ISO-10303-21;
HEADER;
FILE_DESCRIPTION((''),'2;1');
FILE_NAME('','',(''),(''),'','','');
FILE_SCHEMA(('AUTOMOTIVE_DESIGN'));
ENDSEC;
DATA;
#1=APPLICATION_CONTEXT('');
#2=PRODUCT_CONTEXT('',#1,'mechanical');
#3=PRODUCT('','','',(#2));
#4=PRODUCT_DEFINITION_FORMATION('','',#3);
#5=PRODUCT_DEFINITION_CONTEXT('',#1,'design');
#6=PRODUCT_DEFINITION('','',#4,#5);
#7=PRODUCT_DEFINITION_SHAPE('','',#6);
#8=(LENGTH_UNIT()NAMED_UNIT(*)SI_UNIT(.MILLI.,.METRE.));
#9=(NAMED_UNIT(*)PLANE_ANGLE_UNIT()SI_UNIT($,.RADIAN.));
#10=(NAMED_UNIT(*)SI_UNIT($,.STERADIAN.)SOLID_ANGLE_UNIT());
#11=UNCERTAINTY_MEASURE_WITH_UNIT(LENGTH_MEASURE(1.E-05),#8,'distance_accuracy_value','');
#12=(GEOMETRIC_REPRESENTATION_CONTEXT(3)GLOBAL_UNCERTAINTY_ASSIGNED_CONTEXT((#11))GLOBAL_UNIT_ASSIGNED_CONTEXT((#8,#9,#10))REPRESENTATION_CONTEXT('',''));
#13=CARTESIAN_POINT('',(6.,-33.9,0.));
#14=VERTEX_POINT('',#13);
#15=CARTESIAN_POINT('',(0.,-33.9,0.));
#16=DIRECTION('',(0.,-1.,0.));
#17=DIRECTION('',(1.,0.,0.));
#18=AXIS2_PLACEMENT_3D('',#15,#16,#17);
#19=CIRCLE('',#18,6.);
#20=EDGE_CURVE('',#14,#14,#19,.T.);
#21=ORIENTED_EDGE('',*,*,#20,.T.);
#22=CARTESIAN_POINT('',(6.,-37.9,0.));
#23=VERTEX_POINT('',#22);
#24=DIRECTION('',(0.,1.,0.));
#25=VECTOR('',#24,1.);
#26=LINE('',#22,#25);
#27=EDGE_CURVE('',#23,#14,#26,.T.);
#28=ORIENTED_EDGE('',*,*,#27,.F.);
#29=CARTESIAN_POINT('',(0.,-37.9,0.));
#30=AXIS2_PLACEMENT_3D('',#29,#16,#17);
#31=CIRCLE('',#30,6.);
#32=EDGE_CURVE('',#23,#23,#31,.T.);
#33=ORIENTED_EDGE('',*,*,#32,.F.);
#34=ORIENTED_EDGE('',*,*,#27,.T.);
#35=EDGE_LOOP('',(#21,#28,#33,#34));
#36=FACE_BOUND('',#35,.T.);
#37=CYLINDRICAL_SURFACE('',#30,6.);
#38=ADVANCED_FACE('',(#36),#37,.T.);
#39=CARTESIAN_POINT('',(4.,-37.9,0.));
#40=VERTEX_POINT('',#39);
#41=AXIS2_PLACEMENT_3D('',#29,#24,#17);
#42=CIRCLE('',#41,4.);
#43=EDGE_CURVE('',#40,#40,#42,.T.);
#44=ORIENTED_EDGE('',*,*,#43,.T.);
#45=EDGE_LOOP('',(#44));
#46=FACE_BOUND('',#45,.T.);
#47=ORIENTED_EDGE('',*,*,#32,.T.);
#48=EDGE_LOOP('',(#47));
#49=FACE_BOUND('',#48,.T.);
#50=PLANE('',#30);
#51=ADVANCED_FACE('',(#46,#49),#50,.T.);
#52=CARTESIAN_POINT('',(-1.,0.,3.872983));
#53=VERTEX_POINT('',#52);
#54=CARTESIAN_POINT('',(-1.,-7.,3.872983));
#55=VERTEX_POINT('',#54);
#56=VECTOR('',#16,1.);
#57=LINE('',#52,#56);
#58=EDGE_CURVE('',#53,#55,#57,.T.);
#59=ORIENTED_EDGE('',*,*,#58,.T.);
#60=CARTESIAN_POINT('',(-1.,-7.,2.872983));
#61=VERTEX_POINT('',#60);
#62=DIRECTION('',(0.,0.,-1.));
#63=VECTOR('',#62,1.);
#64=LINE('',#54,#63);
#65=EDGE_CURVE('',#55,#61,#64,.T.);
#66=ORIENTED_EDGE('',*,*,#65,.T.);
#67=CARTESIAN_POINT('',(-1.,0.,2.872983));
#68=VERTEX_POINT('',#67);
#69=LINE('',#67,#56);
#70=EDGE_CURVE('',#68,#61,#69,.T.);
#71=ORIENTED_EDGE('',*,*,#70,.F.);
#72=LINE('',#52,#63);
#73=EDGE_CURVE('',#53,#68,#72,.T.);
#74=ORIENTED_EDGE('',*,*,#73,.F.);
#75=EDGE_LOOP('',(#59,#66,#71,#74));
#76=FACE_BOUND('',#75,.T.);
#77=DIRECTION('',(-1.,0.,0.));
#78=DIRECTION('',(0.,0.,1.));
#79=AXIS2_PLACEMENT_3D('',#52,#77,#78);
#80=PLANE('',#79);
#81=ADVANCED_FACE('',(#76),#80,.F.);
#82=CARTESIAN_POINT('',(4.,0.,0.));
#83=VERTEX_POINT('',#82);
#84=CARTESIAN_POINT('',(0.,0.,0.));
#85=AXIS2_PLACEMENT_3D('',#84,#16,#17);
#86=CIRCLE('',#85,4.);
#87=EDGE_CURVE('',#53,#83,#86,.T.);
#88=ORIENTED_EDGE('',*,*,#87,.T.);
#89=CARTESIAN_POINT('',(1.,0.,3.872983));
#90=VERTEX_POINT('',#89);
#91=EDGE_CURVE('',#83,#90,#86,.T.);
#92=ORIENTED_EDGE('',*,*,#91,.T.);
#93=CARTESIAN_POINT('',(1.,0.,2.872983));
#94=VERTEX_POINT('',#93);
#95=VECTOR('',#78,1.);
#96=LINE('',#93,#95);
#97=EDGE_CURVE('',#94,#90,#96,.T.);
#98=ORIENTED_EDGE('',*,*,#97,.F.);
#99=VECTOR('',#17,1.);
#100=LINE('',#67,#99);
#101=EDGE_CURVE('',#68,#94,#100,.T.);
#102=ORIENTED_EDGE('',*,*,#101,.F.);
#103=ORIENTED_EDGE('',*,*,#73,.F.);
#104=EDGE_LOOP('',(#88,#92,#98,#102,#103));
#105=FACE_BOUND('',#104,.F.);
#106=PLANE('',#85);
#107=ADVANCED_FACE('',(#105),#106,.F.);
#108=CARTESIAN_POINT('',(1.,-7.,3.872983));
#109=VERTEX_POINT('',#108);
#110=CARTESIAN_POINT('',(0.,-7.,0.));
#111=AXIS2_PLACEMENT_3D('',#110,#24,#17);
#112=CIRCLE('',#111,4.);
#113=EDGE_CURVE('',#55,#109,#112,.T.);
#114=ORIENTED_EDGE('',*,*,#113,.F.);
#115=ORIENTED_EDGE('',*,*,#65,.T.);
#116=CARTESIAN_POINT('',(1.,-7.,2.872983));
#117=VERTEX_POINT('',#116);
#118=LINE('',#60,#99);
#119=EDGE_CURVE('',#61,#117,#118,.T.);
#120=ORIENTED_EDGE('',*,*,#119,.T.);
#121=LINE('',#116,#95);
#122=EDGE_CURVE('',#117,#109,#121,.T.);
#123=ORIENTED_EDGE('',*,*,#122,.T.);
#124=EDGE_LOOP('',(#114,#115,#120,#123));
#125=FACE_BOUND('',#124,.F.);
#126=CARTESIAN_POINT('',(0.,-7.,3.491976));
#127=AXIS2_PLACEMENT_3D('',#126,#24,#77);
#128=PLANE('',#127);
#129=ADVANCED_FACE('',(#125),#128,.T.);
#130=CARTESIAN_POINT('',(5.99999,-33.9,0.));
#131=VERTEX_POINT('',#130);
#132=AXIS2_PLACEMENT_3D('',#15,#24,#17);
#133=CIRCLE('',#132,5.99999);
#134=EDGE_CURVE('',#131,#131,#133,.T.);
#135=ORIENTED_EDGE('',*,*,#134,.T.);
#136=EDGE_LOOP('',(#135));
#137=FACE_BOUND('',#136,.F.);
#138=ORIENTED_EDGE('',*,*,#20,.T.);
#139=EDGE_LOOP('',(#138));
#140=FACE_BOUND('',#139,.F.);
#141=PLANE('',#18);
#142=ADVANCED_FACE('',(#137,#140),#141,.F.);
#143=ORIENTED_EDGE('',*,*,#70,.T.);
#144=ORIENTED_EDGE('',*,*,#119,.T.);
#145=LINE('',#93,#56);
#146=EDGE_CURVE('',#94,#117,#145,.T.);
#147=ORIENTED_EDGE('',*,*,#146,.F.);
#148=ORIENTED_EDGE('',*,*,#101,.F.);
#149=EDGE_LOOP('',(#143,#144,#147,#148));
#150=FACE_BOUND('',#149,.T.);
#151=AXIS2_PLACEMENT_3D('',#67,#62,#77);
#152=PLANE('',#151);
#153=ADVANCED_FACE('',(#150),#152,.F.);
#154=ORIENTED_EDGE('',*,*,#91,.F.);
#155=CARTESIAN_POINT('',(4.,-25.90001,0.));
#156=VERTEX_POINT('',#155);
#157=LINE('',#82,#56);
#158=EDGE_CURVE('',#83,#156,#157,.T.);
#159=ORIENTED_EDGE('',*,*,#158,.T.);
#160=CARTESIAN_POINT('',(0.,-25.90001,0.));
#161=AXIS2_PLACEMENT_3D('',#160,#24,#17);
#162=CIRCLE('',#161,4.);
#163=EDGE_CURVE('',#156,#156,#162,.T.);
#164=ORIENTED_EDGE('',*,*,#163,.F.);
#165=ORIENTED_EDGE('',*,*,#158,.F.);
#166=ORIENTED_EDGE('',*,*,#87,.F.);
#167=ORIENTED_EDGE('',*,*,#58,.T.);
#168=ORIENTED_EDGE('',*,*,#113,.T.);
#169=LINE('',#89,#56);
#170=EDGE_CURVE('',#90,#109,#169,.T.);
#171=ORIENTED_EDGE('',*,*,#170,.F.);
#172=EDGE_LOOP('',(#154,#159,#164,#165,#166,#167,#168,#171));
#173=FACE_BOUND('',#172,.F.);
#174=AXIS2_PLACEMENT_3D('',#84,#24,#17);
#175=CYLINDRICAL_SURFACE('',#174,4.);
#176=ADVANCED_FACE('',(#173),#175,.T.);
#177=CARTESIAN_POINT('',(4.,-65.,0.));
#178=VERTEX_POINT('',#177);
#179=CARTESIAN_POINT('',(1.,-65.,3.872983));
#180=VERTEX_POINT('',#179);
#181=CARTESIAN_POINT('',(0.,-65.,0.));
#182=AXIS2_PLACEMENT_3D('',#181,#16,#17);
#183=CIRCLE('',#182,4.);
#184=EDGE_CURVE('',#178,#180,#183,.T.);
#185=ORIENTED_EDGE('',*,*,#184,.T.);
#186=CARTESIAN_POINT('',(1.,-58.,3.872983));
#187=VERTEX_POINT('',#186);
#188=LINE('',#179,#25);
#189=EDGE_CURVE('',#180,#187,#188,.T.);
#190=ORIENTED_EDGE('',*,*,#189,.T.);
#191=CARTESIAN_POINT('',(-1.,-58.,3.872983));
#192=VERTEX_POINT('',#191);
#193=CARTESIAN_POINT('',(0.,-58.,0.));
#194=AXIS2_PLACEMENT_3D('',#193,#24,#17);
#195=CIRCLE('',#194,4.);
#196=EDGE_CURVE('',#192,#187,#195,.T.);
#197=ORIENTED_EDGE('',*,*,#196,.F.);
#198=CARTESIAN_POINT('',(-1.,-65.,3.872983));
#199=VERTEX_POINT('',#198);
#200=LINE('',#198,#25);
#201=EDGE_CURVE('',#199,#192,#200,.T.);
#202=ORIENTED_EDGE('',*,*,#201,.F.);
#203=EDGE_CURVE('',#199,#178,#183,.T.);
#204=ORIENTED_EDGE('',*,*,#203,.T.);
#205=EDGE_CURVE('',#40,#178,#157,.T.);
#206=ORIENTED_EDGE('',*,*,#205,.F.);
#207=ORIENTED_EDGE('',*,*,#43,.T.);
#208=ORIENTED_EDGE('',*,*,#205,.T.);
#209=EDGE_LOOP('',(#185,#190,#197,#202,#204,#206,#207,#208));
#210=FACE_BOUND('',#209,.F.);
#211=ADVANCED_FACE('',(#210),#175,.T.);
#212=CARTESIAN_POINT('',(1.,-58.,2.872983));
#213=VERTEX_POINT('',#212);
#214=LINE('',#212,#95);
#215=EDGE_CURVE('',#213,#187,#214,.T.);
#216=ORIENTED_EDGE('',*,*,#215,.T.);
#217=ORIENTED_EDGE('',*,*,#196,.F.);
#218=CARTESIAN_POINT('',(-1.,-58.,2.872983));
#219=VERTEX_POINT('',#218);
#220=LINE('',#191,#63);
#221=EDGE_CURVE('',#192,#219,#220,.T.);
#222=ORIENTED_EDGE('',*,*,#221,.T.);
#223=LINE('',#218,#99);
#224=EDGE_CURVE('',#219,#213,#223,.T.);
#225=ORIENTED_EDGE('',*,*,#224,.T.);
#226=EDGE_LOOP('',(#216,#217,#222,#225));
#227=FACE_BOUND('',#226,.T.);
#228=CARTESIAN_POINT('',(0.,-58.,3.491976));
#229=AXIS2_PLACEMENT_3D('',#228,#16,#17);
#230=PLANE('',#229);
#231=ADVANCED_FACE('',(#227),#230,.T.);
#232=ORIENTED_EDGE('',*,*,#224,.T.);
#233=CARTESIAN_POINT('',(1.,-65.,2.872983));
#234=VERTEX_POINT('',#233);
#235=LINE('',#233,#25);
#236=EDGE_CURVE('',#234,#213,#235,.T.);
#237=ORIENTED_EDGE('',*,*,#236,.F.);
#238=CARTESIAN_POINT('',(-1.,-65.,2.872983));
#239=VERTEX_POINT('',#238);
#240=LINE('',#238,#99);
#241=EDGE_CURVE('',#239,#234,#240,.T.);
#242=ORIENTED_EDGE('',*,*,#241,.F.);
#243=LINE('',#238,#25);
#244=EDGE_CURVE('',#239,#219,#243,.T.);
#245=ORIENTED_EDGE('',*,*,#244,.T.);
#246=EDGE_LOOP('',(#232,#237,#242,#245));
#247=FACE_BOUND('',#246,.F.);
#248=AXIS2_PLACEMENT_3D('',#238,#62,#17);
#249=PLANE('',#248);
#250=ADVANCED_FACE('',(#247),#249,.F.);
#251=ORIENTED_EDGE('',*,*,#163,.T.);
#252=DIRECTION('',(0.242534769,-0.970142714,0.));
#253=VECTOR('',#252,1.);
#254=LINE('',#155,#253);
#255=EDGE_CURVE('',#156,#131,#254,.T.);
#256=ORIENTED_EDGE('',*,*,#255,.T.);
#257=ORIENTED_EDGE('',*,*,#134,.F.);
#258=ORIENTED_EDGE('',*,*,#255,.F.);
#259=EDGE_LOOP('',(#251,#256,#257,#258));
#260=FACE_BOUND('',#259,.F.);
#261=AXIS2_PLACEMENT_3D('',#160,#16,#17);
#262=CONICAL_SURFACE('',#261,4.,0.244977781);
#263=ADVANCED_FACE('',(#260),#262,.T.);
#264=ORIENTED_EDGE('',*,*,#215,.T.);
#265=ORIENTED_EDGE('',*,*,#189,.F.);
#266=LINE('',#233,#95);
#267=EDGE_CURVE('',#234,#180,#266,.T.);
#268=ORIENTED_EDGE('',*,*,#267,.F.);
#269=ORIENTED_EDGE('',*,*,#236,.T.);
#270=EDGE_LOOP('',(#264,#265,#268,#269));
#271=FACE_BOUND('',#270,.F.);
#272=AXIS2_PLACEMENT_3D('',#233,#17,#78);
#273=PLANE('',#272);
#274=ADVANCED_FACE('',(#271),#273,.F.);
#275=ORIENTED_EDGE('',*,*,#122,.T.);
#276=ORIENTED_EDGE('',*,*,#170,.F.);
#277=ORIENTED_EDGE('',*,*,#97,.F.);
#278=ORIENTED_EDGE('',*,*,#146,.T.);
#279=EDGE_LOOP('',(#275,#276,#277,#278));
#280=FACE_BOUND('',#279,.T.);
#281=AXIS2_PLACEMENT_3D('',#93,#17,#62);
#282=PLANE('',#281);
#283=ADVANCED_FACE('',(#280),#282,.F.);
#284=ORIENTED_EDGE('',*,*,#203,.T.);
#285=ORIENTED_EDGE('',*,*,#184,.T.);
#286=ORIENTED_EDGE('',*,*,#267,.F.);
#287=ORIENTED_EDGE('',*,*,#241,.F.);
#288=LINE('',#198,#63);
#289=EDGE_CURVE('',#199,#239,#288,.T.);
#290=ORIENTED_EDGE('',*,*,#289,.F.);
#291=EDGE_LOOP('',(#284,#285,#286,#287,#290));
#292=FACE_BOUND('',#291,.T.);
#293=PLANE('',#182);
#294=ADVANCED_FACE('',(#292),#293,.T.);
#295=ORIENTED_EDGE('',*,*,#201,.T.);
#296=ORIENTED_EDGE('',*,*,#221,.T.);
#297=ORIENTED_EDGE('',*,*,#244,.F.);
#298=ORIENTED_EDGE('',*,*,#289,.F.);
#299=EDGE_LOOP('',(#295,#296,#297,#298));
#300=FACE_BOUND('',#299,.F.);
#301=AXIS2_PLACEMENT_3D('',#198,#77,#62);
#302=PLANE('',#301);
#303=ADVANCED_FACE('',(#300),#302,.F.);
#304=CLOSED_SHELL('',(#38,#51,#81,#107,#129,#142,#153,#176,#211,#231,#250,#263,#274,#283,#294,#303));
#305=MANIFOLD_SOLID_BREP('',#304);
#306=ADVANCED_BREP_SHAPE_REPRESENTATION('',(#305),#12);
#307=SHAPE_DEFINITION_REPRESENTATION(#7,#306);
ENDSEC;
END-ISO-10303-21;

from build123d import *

# Parameters (mm, degrees)
F0_R     = 4
F1_DEPTH = 65
F3_R     = 6
F4_DEPTH = 4
F5_SIZE2 = 1.99999
F5_SIZE  = 7.99999
F7_DEPTH = 7


# Not quite as in the source:
# - a fillet or chamfer is up to 0.001 mm smaller than in the source, because OpenCascade refuses the exact size
# - a pattern or mirror of a feature is missing from the dataset's text; its kind, count and spacing are read off the source's solid


with BuildPart() as f1:
    # F0 (on Front) → F1 (new body)
    with BuildSketch(Plane.XZ):
        Circle(F0_R)
    extrude(amount=F1_DEPTH)

    # F3 (on offset) → F4 (join)
    with BuildSketch(Plane.XZ.offset(37.9)):
        Circle(F3_R)
    extrude(amount=-F4_DEPTH)

    # F5 (size 8 and 2 in the source; OpenCascade refuses exactly that, so slightly less here)
    f5_edges = [f1.edges().sort_by_distance(p)[0] for p in [
        (-4, -33.9, 0),
    ]]
    f5_side = f1.faces().sort_by_distance((-4, -16.95, 0))[0]
    chamfer(f5_edges, length=F5_SIZE, length2=F5_SIZE2, reference=f5_side)

    # F6 (on face) → F7 (cut)
    with BuildSketch(Plane.XZ.offset(65)):
        Polygon((0, 4.4108442962), (-1, 3.8729833462), (-1, 2.8729833462), (1, 2.8729833462), (1, 3.8729833462), align=None)
    f7 = extrude(amount=-F7_DEPTH, mode=Mode.SUBTRACT)

    # F7_copies: F7 across plane
    add(f7.mirror(Plane.ZX.offset(-32.5)), mode=Mode.SUBTRACT)


solid = f1.part
